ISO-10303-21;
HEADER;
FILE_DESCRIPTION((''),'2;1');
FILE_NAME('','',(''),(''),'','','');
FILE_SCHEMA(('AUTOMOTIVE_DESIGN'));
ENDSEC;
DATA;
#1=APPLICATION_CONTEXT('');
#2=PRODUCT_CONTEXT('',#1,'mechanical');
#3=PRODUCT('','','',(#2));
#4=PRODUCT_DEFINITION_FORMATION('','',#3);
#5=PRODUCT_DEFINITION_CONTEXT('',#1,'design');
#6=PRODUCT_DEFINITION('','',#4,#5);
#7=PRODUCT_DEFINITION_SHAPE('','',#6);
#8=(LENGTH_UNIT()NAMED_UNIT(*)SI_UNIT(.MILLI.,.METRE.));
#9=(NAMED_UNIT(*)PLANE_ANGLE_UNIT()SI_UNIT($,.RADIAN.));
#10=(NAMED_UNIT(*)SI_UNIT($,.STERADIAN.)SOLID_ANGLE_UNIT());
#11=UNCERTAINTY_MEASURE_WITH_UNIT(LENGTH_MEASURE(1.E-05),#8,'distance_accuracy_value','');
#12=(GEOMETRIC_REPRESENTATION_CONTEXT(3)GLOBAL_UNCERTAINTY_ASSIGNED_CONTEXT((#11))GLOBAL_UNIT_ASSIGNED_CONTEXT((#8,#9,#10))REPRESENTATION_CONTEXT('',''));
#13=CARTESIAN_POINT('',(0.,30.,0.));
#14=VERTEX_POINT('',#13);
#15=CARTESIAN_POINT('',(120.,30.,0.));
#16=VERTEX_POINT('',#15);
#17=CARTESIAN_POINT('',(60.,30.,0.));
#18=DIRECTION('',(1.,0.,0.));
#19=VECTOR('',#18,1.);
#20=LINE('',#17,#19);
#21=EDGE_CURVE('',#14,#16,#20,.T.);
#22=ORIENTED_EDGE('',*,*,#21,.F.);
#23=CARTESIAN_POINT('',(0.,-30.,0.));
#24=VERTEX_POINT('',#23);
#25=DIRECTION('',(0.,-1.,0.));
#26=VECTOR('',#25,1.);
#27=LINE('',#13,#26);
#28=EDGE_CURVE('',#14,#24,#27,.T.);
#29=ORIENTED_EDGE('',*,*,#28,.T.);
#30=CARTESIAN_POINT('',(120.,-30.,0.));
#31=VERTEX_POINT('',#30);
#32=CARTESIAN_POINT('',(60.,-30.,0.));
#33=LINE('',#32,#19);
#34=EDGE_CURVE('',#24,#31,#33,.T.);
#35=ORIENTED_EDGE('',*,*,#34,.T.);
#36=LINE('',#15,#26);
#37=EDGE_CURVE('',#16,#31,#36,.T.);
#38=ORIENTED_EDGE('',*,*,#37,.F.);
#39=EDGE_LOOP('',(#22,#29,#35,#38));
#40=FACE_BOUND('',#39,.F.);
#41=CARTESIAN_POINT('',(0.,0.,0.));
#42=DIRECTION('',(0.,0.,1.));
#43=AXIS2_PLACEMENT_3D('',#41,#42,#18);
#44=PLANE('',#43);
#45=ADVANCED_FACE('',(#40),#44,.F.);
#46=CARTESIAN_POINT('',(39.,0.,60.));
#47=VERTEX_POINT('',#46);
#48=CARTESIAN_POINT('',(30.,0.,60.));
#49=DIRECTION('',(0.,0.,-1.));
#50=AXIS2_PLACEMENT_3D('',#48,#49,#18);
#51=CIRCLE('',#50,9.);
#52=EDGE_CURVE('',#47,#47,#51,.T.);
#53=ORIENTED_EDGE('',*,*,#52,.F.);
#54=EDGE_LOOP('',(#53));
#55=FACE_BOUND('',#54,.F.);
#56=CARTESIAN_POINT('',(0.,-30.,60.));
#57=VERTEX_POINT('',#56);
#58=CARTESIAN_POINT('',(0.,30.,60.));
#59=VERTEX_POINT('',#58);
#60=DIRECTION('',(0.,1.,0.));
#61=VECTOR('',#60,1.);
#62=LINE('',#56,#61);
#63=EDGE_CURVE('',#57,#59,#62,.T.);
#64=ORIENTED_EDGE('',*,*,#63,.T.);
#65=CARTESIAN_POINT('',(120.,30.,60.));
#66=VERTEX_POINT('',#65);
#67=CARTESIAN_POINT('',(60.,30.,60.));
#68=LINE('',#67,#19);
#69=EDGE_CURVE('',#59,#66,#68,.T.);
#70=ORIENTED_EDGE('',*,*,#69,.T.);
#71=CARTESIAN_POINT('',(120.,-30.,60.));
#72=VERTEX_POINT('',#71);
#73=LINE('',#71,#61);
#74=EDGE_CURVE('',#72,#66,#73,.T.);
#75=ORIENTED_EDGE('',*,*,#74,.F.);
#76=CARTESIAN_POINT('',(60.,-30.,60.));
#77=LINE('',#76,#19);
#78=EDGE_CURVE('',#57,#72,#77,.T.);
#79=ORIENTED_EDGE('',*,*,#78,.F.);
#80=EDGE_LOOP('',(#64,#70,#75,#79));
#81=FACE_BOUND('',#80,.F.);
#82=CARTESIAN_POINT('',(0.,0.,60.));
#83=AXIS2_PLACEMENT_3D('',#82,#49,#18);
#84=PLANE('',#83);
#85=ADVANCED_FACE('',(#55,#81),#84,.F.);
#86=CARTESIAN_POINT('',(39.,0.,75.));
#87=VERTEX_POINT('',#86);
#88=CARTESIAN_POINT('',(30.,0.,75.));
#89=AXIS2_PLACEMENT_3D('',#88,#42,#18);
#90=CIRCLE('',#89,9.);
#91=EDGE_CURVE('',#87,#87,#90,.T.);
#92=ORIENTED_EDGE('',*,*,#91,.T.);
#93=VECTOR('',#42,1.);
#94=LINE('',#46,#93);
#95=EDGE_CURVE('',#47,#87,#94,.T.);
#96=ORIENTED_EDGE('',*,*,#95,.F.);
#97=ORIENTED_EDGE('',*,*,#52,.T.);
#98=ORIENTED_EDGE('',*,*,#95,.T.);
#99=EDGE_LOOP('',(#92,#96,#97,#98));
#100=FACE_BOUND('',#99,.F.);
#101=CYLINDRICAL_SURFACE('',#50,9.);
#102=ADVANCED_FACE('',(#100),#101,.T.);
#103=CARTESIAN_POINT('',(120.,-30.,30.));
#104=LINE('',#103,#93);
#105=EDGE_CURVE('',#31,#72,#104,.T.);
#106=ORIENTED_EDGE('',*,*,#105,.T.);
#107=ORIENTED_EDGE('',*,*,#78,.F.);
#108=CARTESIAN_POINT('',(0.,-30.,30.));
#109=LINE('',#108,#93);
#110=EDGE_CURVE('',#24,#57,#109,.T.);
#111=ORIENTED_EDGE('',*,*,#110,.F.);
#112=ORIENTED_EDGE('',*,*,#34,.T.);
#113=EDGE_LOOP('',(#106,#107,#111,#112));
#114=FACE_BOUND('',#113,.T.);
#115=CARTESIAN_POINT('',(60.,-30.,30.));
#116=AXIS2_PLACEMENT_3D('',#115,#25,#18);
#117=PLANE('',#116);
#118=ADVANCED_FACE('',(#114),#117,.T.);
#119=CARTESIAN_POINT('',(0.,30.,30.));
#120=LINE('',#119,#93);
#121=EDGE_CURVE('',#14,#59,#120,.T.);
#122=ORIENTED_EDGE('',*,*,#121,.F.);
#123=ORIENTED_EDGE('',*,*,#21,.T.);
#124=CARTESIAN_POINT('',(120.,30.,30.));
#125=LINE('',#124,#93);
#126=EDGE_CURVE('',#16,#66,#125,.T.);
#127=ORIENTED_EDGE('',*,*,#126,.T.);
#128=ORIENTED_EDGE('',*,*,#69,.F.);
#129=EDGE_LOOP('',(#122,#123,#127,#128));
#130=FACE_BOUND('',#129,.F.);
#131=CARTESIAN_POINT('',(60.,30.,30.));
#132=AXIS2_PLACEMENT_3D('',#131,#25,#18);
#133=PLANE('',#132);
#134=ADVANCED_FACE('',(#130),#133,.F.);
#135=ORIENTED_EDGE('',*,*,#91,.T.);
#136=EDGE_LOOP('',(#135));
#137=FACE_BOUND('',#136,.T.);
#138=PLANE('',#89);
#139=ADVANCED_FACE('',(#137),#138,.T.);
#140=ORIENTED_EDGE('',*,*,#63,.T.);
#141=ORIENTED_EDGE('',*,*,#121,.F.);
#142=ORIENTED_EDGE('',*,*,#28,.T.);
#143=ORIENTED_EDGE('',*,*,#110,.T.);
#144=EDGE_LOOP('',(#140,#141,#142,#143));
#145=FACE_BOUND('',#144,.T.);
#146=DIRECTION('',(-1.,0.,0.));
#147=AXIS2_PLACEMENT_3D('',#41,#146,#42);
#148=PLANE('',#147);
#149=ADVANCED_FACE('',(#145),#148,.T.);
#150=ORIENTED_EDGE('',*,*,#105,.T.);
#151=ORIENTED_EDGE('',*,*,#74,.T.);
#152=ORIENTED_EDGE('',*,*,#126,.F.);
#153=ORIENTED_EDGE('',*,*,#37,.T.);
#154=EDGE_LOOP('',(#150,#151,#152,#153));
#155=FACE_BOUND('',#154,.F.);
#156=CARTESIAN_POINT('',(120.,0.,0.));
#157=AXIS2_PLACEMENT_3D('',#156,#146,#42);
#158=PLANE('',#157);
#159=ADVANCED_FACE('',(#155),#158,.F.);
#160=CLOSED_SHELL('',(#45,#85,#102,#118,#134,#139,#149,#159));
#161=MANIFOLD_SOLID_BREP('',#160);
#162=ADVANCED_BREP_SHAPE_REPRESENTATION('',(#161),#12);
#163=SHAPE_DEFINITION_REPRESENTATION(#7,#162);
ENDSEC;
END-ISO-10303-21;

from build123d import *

# Parameters (mm, degrees)
F0_W     = 120
F0_H     = 60
F1_DEPTH = 30
F2_R     = 9
F3_DEPTH = 15
F4_DEPTH = 15
F6_DEPTH = 25


# Not quite as in the source:
# - the program builds the solid bodies; features that only make, move or delete a surface that nothing else refers to are left out


with BuildPart() as f1:
    # F0 (on Front) → F1 (new body, symmetric)
    with BuildSketch(Plane.XZ):
        with Locations((60, 30)):
            Rectangle(F0_W, F0_H)
    extrude(amount=F1_DEPTH, both=True)

    # F2 (on face) → F3 (join)
    with BuildSketch(Plane.XY.offset(60)):
        with Locations((30, 0)):
            Circle(F2_R)
    extrude(amount=F3_DEPTH)

    # F2 (on face) → F4 (join)
    with BuildSketch(Plane.XY.offset(60)):
        with Locations((30, 0)):
            Circle(F2_R)
        with Locations((60, 0)):
            Circle(F2_R)
        with Locations((90, 0)):
            Circle(F2_R)
    extrude(amount=-F4_DEPTH)

    # F0 (on Front) → F6 (join)
    with BuildSketch(Plane.XZ):
        with Locations((60, 30)):
            Rectangle(F0_W, F0_H)
    extrude(amount=F6_DEPTH)


solid = f1.part
